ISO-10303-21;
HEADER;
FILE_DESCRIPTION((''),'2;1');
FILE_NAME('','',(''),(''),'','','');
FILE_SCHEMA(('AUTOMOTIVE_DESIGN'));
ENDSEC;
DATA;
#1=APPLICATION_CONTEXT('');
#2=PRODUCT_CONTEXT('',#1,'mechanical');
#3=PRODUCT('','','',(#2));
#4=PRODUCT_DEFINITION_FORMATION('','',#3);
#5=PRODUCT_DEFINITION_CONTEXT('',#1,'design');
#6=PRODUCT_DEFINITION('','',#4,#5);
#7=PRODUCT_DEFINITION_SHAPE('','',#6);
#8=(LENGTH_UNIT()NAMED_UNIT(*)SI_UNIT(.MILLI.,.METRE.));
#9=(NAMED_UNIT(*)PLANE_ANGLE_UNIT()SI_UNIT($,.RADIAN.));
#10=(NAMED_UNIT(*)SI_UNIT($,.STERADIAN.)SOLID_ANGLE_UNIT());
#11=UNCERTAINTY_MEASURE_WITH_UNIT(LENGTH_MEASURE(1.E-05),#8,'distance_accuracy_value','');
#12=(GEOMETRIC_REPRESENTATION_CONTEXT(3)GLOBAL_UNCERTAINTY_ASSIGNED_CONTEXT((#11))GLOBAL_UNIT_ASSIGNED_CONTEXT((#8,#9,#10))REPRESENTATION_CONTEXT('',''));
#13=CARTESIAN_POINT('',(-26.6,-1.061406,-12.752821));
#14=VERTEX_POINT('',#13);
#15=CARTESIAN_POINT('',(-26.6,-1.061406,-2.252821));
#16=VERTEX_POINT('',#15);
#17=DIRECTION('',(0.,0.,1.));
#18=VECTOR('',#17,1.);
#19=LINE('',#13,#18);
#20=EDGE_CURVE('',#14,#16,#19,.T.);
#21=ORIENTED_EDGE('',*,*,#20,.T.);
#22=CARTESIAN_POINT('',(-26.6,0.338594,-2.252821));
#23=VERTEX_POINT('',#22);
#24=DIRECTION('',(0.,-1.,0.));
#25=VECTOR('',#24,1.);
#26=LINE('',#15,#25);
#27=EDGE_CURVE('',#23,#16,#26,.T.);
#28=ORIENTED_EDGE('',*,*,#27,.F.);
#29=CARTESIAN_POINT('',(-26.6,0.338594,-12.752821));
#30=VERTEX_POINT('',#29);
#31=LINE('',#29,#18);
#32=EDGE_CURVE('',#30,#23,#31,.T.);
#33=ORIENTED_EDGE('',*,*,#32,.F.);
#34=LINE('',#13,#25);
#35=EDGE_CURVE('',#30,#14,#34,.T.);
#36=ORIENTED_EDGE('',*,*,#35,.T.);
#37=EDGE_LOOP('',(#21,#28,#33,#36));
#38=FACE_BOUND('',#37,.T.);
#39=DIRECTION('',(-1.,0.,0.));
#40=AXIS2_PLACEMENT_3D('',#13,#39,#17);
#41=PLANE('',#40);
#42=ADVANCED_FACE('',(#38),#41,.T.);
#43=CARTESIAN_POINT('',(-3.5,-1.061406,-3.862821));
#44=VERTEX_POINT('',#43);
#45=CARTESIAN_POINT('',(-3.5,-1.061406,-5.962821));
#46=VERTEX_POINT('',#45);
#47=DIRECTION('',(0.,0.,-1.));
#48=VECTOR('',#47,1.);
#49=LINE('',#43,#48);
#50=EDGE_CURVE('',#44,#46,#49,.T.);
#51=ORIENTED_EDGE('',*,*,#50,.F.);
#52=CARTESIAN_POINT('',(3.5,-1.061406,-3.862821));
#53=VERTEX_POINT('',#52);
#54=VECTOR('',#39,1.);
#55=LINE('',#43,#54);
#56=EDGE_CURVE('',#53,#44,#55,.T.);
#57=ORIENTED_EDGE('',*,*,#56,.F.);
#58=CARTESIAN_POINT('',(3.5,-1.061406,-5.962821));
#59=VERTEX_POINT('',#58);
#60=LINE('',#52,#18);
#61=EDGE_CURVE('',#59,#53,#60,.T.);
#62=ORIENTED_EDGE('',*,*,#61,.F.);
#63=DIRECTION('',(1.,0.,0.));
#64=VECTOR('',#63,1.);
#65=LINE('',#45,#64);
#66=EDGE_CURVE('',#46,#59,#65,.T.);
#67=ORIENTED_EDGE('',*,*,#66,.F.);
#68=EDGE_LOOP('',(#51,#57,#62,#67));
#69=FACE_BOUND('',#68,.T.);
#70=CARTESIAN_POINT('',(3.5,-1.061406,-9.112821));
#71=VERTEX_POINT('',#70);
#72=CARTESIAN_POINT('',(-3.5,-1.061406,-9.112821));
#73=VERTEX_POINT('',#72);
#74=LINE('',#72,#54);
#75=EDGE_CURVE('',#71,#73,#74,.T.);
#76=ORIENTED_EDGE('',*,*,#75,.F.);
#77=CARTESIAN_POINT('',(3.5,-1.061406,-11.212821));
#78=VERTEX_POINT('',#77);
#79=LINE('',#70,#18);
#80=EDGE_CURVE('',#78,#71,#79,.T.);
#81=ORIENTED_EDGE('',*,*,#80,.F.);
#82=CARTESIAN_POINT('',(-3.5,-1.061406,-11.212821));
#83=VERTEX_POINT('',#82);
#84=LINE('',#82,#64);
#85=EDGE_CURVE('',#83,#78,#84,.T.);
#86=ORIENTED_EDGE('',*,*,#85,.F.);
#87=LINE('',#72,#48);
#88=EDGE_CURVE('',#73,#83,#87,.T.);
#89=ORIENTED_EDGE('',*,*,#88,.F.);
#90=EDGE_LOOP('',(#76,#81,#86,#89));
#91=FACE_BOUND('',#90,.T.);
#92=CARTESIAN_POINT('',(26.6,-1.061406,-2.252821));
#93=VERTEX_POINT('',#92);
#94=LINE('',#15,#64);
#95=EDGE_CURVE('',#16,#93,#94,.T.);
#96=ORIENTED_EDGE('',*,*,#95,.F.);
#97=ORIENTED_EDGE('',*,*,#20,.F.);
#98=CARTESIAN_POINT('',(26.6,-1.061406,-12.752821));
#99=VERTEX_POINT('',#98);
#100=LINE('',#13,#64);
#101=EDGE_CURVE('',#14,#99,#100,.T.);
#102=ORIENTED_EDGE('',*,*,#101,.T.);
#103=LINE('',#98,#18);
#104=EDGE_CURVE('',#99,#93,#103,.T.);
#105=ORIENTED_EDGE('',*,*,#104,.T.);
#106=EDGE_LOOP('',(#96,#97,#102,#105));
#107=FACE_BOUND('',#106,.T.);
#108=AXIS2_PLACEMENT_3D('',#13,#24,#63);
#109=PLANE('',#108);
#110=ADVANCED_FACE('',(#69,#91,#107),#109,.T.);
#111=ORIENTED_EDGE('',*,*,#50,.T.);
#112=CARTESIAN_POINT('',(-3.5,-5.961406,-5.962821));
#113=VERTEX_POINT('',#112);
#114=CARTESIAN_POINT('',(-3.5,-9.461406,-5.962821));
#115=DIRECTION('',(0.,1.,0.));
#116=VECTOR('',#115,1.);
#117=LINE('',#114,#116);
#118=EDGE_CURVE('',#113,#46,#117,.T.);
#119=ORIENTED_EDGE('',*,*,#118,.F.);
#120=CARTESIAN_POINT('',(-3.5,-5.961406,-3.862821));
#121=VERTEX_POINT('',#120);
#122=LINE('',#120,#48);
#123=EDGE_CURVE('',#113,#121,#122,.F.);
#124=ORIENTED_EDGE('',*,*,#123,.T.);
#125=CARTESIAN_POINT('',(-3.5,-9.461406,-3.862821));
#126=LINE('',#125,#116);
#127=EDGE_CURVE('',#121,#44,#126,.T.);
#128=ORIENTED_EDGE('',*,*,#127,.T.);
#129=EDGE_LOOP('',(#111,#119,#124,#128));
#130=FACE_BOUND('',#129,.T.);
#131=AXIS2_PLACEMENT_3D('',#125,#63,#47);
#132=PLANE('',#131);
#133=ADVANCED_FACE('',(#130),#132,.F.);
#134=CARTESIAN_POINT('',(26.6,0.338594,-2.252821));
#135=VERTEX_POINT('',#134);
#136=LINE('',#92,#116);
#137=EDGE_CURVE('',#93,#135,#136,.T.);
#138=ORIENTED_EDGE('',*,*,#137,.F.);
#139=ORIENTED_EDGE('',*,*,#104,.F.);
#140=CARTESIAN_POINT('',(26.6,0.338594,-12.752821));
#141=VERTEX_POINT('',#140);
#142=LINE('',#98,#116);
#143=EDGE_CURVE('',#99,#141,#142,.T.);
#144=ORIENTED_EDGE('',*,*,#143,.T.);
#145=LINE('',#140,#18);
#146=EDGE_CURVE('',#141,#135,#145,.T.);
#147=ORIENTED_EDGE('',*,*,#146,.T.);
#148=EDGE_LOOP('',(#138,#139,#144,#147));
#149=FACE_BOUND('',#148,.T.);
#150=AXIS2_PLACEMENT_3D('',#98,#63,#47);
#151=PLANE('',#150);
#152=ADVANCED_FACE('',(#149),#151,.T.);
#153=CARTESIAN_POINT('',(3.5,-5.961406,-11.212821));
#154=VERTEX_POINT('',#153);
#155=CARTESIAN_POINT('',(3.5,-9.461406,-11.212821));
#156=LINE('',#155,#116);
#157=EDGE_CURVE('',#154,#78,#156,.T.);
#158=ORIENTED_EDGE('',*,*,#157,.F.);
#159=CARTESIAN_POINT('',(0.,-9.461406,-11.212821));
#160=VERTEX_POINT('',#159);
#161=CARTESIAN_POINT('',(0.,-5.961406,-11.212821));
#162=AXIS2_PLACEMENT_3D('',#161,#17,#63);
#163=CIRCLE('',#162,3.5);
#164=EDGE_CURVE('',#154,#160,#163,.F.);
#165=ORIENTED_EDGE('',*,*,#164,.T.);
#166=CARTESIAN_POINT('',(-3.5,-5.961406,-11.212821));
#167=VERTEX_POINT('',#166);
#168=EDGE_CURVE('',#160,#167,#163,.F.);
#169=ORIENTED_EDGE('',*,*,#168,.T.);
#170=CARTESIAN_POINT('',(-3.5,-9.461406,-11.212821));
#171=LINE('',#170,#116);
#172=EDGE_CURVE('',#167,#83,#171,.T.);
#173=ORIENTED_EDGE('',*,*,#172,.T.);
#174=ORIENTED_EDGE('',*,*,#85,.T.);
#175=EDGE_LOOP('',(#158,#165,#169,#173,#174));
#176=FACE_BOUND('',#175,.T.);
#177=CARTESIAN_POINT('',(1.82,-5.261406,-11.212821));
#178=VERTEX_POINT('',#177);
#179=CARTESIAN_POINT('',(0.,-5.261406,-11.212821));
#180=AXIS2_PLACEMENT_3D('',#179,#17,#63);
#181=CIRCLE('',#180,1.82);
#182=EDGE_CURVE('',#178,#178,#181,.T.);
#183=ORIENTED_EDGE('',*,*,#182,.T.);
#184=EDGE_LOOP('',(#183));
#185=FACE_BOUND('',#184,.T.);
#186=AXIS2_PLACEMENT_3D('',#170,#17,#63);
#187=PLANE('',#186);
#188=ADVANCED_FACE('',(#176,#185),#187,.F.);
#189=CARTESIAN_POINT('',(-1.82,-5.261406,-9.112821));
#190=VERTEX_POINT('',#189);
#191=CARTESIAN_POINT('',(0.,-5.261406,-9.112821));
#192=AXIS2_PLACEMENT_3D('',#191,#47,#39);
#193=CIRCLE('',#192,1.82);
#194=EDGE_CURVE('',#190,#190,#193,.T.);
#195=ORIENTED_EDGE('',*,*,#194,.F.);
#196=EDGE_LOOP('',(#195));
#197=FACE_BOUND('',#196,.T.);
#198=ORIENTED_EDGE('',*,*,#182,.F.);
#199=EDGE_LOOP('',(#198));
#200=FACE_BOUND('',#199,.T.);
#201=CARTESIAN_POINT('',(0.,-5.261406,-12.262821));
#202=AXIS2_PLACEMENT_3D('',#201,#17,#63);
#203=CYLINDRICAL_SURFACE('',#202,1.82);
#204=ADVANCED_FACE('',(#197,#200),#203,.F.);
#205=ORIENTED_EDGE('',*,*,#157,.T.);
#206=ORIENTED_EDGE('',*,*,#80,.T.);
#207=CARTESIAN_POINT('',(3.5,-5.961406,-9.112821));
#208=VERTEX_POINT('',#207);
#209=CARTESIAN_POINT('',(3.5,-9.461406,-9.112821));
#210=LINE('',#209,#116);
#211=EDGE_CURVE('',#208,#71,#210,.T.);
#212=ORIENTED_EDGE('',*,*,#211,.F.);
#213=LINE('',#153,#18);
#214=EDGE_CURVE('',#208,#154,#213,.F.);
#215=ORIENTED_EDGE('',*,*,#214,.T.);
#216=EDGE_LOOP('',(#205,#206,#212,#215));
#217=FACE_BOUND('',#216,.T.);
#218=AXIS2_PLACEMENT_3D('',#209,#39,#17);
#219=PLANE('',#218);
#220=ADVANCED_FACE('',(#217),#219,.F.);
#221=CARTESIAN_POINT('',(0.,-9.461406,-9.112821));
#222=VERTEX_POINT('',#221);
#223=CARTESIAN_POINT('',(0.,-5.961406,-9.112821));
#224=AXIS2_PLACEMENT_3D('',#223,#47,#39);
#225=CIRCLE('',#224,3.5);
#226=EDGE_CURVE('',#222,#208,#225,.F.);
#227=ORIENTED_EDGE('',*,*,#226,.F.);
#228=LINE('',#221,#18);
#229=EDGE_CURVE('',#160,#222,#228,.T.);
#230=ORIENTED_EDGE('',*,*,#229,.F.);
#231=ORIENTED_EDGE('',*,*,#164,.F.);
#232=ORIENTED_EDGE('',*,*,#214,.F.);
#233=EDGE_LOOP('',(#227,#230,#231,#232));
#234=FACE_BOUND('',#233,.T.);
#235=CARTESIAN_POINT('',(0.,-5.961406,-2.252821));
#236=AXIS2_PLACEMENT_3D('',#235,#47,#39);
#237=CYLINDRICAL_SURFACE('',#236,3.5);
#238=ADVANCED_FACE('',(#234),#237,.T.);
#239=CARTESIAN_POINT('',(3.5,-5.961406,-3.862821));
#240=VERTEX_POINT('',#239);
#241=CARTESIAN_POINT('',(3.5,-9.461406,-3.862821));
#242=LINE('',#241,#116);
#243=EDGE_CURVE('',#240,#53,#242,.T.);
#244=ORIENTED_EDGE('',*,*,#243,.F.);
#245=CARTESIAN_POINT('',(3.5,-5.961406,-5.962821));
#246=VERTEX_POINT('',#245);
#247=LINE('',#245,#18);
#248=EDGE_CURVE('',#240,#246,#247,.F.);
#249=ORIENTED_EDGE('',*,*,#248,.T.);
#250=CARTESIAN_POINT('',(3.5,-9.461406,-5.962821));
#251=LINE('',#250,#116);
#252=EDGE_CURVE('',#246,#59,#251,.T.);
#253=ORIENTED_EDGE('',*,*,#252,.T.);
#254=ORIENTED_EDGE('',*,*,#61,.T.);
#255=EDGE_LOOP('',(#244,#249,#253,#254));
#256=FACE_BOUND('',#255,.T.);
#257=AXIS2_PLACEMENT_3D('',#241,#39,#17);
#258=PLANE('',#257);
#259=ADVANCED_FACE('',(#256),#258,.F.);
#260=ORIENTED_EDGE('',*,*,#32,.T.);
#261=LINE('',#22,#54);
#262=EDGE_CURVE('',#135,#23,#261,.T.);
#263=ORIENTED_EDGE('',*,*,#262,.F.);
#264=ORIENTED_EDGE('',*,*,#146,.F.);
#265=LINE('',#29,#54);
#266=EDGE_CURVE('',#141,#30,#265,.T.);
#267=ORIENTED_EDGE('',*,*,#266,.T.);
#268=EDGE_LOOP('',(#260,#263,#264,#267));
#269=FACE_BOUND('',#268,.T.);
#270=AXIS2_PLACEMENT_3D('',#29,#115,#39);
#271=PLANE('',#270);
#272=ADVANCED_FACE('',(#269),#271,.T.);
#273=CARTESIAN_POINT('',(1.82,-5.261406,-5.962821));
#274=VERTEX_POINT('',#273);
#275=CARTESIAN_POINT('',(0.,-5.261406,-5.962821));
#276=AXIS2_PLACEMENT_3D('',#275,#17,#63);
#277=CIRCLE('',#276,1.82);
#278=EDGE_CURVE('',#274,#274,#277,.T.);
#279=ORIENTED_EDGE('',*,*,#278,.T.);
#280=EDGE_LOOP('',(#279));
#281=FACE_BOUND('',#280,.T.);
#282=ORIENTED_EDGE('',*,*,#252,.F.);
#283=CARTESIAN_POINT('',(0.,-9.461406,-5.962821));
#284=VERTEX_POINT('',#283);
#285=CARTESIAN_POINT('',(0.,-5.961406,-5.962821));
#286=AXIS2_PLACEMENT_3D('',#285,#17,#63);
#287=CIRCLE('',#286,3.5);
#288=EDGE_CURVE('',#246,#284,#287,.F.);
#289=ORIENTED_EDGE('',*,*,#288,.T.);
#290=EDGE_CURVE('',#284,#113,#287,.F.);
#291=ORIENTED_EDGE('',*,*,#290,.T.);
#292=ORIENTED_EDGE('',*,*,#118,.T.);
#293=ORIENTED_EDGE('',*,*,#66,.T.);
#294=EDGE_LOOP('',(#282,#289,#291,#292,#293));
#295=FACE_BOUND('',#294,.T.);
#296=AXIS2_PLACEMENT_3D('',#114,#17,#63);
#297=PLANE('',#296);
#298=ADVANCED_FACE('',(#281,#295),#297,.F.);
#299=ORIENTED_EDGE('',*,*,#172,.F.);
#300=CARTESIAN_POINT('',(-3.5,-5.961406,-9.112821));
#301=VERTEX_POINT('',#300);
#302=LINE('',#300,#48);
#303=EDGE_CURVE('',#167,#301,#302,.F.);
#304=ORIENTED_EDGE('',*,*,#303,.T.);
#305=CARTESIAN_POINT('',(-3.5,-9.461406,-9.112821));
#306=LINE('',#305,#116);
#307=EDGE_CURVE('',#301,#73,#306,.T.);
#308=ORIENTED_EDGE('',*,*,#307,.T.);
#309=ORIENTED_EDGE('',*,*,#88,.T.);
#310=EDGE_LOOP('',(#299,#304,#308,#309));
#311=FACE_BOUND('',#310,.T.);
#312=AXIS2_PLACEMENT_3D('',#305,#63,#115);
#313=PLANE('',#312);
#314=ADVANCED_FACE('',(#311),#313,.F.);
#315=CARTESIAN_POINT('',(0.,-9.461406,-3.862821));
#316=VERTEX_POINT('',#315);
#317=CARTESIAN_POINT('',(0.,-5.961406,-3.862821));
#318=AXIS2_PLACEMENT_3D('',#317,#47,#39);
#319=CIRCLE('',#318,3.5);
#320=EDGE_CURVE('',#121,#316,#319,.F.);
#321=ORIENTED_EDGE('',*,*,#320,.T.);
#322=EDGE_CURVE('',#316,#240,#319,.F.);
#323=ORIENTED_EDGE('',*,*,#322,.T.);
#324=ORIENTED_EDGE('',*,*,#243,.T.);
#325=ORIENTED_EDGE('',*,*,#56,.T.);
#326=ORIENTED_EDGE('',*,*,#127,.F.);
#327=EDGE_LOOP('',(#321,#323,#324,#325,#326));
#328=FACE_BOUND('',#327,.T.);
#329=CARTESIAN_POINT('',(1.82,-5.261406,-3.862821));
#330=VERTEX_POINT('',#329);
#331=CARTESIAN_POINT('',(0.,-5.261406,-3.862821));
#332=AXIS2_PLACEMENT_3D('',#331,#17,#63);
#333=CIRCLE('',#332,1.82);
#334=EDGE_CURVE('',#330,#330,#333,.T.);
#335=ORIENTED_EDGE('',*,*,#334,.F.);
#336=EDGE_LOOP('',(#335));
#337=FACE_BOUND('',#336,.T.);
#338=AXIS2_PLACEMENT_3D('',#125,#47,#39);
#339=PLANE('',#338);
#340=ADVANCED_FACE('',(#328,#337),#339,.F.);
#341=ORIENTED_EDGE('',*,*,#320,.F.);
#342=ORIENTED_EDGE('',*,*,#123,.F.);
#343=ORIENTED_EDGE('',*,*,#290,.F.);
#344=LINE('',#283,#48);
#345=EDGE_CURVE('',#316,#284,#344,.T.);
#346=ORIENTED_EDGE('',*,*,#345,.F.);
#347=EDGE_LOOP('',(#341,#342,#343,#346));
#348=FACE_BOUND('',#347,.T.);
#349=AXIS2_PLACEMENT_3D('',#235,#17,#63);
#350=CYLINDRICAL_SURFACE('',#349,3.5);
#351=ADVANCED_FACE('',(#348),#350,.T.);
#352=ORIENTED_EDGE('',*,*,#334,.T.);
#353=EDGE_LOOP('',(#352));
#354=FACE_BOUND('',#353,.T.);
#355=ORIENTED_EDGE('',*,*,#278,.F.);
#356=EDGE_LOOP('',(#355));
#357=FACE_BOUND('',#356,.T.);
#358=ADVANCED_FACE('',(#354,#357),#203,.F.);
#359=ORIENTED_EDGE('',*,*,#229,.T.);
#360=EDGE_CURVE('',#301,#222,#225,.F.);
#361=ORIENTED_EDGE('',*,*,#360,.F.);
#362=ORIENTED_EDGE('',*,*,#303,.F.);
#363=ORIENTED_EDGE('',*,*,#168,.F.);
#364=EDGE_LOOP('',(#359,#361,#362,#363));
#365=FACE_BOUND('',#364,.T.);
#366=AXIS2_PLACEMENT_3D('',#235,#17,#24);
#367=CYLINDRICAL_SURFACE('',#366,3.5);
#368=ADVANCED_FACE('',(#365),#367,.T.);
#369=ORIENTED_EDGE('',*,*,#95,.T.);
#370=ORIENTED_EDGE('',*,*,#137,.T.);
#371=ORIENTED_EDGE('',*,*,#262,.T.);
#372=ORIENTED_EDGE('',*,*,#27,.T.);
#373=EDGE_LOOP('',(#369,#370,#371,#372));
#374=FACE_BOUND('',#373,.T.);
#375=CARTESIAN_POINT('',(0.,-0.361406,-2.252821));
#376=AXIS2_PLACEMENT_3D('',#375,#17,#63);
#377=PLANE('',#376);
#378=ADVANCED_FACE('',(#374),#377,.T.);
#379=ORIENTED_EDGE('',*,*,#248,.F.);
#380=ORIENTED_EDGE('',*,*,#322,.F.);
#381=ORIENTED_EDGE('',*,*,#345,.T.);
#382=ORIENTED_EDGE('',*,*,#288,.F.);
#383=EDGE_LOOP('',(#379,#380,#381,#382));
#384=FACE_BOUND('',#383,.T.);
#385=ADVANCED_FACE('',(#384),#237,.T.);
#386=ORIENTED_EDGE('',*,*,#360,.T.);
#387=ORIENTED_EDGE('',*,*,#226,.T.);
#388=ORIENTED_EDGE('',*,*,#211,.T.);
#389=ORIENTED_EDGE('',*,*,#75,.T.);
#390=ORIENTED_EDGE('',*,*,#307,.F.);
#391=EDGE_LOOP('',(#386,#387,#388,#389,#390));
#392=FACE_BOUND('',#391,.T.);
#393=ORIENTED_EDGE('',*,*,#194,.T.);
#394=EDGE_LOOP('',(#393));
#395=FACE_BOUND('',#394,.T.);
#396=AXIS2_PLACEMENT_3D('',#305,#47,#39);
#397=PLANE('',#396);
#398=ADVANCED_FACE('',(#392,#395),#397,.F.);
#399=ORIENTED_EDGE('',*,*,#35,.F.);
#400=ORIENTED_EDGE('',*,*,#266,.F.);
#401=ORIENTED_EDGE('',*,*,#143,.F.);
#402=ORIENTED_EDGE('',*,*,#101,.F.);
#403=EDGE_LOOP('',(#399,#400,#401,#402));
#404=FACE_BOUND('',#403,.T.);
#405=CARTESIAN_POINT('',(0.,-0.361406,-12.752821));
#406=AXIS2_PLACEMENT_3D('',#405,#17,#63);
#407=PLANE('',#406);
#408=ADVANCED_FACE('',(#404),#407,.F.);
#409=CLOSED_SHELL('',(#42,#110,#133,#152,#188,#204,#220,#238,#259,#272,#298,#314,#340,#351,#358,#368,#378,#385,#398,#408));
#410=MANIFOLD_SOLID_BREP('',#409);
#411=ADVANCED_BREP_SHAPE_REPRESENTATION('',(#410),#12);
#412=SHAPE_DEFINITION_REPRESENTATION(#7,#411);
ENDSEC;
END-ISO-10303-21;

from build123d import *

# Parameters (mm, degrees)
SKETCH1_W           = 2
SKETCH1_H           = 76
BOSS_EXTRUDE1_DEPTH = 15
SKETCH2_W           = 10
SKETCH2_H           = 3
BOSS_EXTRUDE2_DEPTH = 12
SKETCH3_R           = 2.6
CUT_EXTRUDE1_DEPTH  = 12
FILLET1_R           = 5
SCALE1_SCALE        = 0.7


with BuildPart() as part:
    # Sketch1 → Boss-Extrude1 (new body)
    with BuildSketch(Plane(origin=(0, 0, 0), x_dir=(0, 1, 0), z_dir=(0, 0, 1))):
        Rectangle(SKETCH1_W, SKETCH1_H)
    extrude(amount=-BOSS_EXTRUDE1_DEPTH)

    # Sketch2 → Boss-Extrude2 (add)
    with BuildSketch(Plane.XZ.offset(1)):
        with Locations((0, -3.8)):
            Rectangle(SKETCH2_W, SKETCH2_H)
        with Locations((0, -11.3)):
            Rectangle(SKETCH2_W, SKETCH2_H)
    extrude(amount=BOSS_EXTRUDE2_DEPTH)

    # Sketch3 → Cut-Extrude1 (cut)
    with BuildSketch(Plane.XY.offset(-2.3)):
        with Locations((0, -7)):
            Circle(SKETCH3_R)
    extrude(amount=-CUT_EXTRUDE1_DEPTH, mode=Mode.SUBTRACT)

    # Fillet1
    fillet1_edges = [part.edges().sort_by_distance(p)[0] for p in [
        (-5, -13, -11.3),
        (5, -13, -11.3),
        (5, -13, -3.8),
        (-5, -13, -3.8),
    ]]
    fillet(fillet1_edges, radius=FILLET1_R - 0.0001)  # a hair under: the kernel refuses the full size


with BuildPart() as part_1:
    # Scale1: scaled about (0, -1.204695158, -7.509404587)
    add(part.part.scale(SCALE1_SCALE).moved(Location((0, -0.361408547, -2.252821376))))


solid = part_1.part
